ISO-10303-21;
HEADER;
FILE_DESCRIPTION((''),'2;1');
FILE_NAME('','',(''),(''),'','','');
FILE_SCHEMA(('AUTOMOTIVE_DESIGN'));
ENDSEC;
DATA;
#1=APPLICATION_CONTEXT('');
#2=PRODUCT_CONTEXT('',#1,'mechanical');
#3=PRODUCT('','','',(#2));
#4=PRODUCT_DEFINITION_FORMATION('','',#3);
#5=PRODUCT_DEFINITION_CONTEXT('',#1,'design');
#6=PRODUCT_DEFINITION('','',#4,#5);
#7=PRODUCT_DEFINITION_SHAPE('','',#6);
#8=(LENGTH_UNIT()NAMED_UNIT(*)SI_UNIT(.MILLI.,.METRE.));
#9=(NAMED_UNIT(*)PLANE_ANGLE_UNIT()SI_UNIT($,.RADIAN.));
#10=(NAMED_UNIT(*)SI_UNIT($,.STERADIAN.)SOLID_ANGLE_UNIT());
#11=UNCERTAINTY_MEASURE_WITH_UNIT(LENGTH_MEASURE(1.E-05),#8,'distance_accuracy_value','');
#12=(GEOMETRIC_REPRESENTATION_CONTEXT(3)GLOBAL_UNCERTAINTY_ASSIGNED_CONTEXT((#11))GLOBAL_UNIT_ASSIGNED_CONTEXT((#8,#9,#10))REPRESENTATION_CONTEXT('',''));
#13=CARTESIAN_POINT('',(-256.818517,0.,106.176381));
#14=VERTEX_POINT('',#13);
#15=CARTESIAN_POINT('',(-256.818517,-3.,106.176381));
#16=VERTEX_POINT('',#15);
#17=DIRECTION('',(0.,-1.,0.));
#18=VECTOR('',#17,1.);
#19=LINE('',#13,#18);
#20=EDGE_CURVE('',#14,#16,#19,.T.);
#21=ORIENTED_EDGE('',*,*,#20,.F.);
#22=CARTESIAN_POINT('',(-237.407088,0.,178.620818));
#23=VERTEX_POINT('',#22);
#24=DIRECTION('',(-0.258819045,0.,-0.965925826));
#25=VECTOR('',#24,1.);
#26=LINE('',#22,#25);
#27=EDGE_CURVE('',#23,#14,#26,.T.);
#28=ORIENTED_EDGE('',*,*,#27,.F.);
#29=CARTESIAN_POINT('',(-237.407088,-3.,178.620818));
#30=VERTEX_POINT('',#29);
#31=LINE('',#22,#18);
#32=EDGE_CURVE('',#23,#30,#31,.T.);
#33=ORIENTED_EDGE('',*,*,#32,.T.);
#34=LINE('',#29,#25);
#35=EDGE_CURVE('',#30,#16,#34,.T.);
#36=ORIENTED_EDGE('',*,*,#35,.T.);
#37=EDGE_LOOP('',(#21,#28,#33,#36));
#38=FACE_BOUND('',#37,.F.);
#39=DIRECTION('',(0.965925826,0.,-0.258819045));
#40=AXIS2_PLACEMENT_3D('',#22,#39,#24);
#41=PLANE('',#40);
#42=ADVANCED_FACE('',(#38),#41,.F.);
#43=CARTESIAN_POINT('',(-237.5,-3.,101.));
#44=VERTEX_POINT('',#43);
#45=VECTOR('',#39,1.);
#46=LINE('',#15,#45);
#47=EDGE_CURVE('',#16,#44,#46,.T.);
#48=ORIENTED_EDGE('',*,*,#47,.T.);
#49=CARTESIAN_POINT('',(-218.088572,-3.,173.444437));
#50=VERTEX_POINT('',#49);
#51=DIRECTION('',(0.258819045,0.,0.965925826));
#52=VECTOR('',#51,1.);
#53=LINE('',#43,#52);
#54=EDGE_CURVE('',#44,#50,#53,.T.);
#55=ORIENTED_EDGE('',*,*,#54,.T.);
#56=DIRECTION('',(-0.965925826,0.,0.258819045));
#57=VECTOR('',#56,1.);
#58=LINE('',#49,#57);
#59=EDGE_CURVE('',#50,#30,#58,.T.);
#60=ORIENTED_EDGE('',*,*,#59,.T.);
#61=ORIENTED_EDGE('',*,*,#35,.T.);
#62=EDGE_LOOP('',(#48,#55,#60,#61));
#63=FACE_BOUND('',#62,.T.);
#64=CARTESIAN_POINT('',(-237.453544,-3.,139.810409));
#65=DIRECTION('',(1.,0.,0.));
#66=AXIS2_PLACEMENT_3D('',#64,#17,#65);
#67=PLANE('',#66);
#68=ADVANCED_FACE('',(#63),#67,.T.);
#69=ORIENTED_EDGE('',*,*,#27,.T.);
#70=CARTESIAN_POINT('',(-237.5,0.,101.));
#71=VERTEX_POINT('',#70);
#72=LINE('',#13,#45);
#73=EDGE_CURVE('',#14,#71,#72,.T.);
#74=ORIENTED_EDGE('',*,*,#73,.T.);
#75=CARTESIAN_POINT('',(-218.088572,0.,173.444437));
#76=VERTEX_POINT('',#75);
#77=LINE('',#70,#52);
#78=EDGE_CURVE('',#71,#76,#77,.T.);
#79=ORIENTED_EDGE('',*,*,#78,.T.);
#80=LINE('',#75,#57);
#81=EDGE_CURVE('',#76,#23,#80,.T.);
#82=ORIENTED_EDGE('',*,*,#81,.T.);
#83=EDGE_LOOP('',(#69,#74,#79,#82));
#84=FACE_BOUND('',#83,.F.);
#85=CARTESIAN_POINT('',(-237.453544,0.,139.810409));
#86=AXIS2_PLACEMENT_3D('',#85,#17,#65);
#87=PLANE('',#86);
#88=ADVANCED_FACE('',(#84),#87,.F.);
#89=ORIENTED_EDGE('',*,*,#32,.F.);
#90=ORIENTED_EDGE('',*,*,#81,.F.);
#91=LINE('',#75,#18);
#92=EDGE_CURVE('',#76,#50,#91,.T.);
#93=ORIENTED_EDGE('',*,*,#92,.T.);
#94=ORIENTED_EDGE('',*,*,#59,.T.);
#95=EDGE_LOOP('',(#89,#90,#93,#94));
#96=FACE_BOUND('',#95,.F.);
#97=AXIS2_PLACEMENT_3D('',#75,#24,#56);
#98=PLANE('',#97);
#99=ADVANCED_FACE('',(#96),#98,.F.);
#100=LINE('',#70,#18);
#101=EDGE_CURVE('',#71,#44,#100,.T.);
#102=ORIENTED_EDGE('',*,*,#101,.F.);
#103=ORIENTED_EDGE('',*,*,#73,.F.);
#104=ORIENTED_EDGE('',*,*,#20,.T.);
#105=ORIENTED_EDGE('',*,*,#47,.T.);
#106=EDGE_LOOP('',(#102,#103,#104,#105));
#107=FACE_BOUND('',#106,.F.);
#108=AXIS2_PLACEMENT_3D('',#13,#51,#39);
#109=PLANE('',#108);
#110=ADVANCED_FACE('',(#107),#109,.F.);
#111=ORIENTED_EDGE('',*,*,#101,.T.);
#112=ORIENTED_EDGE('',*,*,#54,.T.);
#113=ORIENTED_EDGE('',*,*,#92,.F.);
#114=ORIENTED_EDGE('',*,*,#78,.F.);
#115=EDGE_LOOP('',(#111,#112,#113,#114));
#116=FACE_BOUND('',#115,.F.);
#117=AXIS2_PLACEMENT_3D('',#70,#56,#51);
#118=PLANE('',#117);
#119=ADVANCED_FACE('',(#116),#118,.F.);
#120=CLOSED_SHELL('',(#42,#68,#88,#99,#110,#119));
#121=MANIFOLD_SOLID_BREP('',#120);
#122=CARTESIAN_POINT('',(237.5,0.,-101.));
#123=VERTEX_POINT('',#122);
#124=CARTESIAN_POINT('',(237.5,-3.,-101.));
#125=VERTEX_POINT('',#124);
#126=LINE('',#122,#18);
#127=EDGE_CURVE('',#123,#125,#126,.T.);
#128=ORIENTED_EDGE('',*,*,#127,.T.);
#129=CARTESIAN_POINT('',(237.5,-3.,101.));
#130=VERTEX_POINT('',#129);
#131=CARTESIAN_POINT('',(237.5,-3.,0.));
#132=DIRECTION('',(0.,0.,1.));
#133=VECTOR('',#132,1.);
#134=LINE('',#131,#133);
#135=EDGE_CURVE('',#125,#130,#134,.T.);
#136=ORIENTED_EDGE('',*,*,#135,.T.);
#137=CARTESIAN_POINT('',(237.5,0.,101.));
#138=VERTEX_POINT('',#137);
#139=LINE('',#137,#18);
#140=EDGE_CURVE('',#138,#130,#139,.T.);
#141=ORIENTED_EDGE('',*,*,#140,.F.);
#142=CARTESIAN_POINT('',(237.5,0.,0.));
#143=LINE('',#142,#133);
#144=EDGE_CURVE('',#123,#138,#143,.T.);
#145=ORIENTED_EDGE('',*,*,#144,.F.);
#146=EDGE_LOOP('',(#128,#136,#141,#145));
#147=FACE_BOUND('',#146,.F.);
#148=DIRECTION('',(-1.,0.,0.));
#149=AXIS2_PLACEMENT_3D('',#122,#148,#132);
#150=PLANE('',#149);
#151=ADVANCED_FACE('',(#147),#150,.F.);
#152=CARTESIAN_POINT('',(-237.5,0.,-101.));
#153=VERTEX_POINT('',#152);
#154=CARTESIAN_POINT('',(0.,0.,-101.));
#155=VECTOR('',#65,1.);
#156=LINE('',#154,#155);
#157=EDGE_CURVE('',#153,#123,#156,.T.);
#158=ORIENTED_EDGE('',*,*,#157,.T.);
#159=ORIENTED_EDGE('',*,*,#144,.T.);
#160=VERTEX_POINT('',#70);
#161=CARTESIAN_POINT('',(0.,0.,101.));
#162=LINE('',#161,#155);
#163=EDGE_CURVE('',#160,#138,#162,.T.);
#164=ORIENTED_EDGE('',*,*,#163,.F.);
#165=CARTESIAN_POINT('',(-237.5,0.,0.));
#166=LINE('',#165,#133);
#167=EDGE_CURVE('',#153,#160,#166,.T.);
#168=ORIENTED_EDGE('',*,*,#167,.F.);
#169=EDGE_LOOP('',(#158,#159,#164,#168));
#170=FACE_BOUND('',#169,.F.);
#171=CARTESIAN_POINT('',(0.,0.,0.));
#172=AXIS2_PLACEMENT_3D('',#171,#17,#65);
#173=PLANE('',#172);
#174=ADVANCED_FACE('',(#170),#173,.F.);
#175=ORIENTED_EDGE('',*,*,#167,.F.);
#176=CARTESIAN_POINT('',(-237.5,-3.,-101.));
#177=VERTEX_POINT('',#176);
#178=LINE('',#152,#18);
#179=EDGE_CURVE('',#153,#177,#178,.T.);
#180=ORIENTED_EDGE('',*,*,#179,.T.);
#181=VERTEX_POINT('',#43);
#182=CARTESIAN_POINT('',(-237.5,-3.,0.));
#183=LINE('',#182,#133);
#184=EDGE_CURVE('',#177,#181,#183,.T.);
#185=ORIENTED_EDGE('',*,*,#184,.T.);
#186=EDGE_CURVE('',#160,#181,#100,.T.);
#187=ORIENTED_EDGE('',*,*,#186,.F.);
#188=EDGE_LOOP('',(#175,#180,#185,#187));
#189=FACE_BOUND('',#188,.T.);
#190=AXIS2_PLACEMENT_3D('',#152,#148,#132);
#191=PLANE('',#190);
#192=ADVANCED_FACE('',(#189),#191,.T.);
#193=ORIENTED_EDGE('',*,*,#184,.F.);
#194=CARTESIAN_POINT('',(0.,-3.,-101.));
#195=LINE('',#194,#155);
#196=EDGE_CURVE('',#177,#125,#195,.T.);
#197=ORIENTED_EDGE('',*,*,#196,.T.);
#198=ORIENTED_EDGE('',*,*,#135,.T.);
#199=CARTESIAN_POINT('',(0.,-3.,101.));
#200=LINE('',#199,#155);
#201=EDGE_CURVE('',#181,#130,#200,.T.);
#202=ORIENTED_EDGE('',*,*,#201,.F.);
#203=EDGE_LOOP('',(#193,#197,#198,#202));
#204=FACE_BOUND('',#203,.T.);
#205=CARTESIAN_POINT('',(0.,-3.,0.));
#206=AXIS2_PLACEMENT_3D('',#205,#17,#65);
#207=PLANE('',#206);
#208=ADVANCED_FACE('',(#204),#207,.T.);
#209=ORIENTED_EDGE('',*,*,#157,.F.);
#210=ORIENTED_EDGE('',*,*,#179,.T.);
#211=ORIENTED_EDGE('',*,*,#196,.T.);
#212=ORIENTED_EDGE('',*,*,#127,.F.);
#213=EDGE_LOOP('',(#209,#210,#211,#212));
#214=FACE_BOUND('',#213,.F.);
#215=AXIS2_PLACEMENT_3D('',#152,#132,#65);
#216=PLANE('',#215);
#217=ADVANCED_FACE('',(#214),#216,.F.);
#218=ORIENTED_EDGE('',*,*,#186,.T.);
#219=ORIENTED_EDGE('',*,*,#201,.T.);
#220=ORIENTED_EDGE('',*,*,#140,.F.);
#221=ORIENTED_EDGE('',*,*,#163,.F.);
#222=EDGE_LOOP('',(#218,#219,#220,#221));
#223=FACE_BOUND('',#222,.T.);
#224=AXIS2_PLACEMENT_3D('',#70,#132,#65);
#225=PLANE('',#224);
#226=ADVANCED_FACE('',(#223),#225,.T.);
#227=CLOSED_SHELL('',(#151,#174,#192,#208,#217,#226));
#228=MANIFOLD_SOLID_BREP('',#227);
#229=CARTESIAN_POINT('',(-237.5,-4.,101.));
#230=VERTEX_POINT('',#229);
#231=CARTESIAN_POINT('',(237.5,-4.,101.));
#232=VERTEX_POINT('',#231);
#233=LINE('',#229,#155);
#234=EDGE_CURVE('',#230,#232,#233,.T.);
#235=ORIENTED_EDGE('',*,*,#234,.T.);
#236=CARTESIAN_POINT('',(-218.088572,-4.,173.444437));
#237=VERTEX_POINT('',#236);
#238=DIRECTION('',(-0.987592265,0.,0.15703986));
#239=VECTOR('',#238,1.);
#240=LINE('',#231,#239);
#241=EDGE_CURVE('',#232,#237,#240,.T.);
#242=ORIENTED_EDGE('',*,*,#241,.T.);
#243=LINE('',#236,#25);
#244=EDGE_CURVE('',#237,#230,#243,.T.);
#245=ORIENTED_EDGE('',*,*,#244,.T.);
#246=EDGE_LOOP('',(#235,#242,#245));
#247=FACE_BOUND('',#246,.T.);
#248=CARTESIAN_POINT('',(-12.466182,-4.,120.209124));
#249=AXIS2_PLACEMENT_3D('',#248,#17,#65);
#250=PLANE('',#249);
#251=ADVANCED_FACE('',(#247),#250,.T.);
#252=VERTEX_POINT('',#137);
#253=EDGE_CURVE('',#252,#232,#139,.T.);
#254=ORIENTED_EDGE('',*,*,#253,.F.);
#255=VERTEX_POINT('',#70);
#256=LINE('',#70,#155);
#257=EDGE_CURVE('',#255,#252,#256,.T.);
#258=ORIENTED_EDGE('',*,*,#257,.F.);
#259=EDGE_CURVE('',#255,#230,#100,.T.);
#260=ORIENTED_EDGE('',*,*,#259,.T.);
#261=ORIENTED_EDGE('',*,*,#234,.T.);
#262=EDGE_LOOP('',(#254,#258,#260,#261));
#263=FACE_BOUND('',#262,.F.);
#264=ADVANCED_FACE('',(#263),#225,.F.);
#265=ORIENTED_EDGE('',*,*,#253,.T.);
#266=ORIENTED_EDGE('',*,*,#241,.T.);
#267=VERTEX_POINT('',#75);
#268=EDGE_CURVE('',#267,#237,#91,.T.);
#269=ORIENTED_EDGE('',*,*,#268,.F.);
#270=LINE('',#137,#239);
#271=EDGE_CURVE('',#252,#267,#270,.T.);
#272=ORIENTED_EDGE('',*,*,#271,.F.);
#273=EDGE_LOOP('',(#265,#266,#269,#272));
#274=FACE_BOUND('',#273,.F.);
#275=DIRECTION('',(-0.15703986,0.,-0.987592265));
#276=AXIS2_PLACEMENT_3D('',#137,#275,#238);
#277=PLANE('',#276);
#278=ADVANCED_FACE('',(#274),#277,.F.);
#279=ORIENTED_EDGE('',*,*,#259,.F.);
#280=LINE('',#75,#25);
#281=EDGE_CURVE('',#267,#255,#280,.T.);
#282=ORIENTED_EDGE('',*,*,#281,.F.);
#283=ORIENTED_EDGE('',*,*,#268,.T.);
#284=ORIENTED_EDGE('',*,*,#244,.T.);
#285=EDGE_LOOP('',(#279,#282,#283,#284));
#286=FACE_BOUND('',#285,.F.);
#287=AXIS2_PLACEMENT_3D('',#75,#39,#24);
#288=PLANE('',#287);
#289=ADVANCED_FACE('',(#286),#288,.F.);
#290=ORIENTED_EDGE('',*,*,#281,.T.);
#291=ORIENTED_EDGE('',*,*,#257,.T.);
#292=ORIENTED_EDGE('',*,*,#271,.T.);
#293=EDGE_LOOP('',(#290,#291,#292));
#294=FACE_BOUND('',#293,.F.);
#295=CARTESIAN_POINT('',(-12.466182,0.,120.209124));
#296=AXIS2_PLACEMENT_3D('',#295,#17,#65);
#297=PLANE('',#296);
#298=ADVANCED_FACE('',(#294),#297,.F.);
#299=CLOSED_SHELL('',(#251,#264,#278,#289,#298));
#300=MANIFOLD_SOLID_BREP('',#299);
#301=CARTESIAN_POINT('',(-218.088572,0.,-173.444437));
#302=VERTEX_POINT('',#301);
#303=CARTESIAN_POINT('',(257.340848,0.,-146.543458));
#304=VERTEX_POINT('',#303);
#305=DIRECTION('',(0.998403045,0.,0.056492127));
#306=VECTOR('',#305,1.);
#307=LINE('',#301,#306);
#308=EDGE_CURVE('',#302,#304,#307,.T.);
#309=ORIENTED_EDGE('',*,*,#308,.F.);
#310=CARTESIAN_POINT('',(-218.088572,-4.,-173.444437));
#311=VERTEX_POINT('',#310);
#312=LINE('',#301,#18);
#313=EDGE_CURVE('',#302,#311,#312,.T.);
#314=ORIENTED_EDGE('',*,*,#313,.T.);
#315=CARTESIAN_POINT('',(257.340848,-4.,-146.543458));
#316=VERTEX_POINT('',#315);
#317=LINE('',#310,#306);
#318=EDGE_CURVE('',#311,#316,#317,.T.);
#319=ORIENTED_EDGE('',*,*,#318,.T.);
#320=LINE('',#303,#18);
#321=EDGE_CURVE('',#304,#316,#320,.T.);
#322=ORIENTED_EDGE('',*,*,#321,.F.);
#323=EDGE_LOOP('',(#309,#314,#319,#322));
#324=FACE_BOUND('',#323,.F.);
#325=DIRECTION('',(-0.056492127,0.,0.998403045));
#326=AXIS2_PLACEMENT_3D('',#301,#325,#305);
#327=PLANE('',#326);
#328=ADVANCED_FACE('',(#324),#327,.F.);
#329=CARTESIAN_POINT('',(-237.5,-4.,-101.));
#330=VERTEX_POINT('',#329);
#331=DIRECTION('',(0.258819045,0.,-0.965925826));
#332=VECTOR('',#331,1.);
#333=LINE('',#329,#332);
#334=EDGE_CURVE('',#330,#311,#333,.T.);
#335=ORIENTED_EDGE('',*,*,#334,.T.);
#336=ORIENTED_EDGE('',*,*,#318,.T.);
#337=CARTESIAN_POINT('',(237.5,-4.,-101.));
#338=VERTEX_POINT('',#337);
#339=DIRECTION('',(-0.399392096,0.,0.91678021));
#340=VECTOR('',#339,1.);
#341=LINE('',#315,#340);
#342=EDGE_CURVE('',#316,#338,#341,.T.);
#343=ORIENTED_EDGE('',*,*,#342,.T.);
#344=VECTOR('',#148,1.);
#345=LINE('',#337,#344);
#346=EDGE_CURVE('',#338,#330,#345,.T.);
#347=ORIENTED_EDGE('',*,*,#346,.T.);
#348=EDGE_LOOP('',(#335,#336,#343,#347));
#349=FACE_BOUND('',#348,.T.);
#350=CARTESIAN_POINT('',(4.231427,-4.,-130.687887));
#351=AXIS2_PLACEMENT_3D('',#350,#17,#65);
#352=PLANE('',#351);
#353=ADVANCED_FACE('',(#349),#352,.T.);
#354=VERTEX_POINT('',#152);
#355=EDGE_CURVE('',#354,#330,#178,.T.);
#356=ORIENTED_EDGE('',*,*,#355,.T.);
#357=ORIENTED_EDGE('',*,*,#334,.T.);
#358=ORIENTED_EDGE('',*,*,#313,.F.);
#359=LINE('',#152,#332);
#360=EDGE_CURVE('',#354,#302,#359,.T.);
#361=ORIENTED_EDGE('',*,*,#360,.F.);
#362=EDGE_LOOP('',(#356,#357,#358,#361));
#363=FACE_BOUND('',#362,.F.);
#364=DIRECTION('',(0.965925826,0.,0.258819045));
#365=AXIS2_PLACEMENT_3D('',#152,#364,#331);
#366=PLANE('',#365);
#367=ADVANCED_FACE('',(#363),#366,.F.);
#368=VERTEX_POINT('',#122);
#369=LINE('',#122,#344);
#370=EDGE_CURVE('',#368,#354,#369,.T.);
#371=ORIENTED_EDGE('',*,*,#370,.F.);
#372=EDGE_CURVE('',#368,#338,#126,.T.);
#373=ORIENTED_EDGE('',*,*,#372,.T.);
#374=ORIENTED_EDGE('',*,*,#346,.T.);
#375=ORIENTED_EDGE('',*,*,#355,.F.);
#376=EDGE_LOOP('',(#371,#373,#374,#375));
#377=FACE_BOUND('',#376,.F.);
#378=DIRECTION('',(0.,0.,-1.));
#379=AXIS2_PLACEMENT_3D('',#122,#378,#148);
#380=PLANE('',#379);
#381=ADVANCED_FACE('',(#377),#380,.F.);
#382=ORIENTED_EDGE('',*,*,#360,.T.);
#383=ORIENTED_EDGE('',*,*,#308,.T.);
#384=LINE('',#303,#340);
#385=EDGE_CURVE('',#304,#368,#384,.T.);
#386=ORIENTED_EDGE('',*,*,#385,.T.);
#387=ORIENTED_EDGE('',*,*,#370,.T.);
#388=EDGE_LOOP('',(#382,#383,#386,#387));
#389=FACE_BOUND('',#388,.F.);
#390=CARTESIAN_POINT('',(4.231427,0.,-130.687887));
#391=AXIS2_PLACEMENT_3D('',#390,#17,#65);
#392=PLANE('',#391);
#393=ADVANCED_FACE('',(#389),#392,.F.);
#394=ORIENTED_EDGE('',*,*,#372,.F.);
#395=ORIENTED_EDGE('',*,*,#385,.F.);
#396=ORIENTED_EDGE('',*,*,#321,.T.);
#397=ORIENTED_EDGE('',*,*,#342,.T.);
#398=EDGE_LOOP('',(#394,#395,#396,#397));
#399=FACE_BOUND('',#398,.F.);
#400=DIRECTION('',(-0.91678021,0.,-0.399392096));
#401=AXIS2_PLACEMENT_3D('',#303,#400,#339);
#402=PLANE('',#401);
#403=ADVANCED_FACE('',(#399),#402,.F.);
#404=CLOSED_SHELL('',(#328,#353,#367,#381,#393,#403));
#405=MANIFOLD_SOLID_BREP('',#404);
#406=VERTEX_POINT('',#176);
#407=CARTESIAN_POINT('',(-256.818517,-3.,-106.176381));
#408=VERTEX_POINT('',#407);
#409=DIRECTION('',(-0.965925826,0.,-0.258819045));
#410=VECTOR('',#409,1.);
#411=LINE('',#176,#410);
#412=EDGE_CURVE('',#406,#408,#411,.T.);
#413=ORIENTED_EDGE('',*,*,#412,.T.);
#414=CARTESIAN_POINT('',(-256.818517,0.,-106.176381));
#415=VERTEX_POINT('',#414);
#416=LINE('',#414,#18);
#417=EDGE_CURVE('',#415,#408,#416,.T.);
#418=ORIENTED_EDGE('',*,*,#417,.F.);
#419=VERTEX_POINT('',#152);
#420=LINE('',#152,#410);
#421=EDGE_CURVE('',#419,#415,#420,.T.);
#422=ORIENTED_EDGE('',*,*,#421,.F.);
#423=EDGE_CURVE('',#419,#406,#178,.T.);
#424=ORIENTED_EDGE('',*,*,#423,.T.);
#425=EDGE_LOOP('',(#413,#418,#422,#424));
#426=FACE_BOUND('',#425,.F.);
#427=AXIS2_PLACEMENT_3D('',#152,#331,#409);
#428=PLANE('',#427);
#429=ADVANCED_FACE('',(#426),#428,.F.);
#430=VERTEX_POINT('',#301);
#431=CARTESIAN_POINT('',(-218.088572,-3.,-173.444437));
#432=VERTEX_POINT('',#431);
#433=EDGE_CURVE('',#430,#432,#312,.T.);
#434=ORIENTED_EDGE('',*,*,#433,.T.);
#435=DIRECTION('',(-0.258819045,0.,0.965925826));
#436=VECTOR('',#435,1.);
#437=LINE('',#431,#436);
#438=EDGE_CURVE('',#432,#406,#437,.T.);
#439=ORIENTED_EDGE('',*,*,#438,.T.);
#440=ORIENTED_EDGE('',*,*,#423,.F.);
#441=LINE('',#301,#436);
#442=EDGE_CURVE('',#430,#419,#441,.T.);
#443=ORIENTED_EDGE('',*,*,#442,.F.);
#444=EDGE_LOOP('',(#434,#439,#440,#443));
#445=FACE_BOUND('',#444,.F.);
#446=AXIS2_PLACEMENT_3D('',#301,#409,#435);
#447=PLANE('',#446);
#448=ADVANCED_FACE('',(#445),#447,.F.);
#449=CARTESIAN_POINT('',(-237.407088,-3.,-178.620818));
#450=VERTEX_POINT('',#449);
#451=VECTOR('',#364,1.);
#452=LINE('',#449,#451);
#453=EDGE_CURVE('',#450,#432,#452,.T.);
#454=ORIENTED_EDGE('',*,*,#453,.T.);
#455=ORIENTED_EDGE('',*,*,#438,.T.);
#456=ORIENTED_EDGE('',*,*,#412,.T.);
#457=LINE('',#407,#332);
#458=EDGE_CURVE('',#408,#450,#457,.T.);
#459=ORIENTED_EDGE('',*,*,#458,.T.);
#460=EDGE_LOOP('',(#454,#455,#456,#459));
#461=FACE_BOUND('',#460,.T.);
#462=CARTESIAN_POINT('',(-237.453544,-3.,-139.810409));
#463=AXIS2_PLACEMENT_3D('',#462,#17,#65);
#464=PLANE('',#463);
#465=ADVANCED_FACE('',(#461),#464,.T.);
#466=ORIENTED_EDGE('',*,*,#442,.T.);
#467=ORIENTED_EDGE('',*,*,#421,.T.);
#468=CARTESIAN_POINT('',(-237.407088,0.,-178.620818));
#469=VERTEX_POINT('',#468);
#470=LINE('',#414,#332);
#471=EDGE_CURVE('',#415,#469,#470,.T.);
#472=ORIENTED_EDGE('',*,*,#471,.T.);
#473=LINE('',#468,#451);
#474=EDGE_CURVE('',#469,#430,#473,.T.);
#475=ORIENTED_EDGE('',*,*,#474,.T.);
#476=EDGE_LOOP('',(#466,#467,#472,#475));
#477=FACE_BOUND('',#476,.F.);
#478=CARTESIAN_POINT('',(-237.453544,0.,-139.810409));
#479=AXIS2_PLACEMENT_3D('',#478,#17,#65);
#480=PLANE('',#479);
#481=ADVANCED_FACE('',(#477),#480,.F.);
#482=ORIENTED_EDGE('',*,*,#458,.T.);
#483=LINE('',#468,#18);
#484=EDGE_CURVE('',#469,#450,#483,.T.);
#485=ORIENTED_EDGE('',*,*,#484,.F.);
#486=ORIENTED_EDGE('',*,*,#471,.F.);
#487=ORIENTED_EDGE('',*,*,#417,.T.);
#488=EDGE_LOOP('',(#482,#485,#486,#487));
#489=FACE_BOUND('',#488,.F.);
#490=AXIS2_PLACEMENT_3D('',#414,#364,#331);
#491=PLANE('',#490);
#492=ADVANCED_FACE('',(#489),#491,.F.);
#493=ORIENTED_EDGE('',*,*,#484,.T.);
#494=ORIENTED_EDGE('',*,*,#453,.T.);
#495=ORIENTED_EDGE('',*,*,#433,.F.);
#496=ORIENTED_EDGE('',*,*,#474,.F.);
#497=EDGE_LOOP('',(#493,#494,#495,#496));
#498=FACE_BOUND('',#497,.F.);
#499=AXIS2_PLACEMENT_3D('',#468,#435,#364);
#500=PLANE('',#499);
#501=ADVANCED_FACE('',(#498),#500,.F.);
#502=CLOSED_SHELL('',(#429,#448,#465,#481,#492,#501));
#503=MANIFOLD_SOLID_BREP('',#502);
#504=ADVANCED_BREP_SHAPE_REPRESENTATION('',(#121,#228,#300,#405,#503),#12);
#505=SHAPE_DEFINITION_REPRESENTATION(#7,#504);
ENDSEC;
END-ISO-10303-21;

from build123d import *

# Parameters (mm, degrees)
F1_DEPTH = 4
F0_W     = 475
F0_H     = 202
F2_DEPTH = 3


# Not quite as in the source:
# - a feature names something its author has since deleted; it is built from what else it names


with BuildPart() as f1:
    # F0 (on Front) → F1 (new body)
    with BuildSketch(Plane.XZ):
        Polygon((-218.0885716173, 173.4444369717), (-237.5, 101), (237.5, 101), align=None)
    extrude(amount=F1_DEPTH)


with BuildPart() as f1b:
    # F0 (on Front) → F1, piece 2 (new body)
    with BuildSketch(Plane.XZ):
        Polygon((237.5, -101), (-237.5, -101), (-218.0885716173, -173.4444369717), (257.3408484459, -146.5434581041), align=None)
    extrude(amount=F1_DEPTH)


with BuildPart() as f2:
    # F0 (on Front) → F2 (new body)
    with BuildSketch(Plane.XZ):
        Rectangle(F0_W, F0_H)
    extrude(amount=F2_DEPTH)


with BuildPart() as f2b:
    # F0 (on Front) → F2, piece 2 (new body)
    with BuildSketch(Plane.XZ):
        Polygon((-256.8185165258, 106.1763809021), (-237.5, 101), (-218.0885716173, 173.4444369717), (-237.4070881431, 178.6208178737), align=None)
    extrude(amount=F2_DEPTH)


with BuildPart() as f2c:
    # F0 (on Front) → F2, piece 3 (new body)
    with BuildSketch(Plane.XZ):
        Polygon((-218.0885716173, -173.4444369717), (-237.5, -101), (-256.8185165258, -106.1763809021), (-237.4070881431, -178.6208178737), align=None)
    extrude(amount=F2_DEPTH)


solid = Compound([f1.part, f1b.part, f2.part, f2b.part, f2c.part])
